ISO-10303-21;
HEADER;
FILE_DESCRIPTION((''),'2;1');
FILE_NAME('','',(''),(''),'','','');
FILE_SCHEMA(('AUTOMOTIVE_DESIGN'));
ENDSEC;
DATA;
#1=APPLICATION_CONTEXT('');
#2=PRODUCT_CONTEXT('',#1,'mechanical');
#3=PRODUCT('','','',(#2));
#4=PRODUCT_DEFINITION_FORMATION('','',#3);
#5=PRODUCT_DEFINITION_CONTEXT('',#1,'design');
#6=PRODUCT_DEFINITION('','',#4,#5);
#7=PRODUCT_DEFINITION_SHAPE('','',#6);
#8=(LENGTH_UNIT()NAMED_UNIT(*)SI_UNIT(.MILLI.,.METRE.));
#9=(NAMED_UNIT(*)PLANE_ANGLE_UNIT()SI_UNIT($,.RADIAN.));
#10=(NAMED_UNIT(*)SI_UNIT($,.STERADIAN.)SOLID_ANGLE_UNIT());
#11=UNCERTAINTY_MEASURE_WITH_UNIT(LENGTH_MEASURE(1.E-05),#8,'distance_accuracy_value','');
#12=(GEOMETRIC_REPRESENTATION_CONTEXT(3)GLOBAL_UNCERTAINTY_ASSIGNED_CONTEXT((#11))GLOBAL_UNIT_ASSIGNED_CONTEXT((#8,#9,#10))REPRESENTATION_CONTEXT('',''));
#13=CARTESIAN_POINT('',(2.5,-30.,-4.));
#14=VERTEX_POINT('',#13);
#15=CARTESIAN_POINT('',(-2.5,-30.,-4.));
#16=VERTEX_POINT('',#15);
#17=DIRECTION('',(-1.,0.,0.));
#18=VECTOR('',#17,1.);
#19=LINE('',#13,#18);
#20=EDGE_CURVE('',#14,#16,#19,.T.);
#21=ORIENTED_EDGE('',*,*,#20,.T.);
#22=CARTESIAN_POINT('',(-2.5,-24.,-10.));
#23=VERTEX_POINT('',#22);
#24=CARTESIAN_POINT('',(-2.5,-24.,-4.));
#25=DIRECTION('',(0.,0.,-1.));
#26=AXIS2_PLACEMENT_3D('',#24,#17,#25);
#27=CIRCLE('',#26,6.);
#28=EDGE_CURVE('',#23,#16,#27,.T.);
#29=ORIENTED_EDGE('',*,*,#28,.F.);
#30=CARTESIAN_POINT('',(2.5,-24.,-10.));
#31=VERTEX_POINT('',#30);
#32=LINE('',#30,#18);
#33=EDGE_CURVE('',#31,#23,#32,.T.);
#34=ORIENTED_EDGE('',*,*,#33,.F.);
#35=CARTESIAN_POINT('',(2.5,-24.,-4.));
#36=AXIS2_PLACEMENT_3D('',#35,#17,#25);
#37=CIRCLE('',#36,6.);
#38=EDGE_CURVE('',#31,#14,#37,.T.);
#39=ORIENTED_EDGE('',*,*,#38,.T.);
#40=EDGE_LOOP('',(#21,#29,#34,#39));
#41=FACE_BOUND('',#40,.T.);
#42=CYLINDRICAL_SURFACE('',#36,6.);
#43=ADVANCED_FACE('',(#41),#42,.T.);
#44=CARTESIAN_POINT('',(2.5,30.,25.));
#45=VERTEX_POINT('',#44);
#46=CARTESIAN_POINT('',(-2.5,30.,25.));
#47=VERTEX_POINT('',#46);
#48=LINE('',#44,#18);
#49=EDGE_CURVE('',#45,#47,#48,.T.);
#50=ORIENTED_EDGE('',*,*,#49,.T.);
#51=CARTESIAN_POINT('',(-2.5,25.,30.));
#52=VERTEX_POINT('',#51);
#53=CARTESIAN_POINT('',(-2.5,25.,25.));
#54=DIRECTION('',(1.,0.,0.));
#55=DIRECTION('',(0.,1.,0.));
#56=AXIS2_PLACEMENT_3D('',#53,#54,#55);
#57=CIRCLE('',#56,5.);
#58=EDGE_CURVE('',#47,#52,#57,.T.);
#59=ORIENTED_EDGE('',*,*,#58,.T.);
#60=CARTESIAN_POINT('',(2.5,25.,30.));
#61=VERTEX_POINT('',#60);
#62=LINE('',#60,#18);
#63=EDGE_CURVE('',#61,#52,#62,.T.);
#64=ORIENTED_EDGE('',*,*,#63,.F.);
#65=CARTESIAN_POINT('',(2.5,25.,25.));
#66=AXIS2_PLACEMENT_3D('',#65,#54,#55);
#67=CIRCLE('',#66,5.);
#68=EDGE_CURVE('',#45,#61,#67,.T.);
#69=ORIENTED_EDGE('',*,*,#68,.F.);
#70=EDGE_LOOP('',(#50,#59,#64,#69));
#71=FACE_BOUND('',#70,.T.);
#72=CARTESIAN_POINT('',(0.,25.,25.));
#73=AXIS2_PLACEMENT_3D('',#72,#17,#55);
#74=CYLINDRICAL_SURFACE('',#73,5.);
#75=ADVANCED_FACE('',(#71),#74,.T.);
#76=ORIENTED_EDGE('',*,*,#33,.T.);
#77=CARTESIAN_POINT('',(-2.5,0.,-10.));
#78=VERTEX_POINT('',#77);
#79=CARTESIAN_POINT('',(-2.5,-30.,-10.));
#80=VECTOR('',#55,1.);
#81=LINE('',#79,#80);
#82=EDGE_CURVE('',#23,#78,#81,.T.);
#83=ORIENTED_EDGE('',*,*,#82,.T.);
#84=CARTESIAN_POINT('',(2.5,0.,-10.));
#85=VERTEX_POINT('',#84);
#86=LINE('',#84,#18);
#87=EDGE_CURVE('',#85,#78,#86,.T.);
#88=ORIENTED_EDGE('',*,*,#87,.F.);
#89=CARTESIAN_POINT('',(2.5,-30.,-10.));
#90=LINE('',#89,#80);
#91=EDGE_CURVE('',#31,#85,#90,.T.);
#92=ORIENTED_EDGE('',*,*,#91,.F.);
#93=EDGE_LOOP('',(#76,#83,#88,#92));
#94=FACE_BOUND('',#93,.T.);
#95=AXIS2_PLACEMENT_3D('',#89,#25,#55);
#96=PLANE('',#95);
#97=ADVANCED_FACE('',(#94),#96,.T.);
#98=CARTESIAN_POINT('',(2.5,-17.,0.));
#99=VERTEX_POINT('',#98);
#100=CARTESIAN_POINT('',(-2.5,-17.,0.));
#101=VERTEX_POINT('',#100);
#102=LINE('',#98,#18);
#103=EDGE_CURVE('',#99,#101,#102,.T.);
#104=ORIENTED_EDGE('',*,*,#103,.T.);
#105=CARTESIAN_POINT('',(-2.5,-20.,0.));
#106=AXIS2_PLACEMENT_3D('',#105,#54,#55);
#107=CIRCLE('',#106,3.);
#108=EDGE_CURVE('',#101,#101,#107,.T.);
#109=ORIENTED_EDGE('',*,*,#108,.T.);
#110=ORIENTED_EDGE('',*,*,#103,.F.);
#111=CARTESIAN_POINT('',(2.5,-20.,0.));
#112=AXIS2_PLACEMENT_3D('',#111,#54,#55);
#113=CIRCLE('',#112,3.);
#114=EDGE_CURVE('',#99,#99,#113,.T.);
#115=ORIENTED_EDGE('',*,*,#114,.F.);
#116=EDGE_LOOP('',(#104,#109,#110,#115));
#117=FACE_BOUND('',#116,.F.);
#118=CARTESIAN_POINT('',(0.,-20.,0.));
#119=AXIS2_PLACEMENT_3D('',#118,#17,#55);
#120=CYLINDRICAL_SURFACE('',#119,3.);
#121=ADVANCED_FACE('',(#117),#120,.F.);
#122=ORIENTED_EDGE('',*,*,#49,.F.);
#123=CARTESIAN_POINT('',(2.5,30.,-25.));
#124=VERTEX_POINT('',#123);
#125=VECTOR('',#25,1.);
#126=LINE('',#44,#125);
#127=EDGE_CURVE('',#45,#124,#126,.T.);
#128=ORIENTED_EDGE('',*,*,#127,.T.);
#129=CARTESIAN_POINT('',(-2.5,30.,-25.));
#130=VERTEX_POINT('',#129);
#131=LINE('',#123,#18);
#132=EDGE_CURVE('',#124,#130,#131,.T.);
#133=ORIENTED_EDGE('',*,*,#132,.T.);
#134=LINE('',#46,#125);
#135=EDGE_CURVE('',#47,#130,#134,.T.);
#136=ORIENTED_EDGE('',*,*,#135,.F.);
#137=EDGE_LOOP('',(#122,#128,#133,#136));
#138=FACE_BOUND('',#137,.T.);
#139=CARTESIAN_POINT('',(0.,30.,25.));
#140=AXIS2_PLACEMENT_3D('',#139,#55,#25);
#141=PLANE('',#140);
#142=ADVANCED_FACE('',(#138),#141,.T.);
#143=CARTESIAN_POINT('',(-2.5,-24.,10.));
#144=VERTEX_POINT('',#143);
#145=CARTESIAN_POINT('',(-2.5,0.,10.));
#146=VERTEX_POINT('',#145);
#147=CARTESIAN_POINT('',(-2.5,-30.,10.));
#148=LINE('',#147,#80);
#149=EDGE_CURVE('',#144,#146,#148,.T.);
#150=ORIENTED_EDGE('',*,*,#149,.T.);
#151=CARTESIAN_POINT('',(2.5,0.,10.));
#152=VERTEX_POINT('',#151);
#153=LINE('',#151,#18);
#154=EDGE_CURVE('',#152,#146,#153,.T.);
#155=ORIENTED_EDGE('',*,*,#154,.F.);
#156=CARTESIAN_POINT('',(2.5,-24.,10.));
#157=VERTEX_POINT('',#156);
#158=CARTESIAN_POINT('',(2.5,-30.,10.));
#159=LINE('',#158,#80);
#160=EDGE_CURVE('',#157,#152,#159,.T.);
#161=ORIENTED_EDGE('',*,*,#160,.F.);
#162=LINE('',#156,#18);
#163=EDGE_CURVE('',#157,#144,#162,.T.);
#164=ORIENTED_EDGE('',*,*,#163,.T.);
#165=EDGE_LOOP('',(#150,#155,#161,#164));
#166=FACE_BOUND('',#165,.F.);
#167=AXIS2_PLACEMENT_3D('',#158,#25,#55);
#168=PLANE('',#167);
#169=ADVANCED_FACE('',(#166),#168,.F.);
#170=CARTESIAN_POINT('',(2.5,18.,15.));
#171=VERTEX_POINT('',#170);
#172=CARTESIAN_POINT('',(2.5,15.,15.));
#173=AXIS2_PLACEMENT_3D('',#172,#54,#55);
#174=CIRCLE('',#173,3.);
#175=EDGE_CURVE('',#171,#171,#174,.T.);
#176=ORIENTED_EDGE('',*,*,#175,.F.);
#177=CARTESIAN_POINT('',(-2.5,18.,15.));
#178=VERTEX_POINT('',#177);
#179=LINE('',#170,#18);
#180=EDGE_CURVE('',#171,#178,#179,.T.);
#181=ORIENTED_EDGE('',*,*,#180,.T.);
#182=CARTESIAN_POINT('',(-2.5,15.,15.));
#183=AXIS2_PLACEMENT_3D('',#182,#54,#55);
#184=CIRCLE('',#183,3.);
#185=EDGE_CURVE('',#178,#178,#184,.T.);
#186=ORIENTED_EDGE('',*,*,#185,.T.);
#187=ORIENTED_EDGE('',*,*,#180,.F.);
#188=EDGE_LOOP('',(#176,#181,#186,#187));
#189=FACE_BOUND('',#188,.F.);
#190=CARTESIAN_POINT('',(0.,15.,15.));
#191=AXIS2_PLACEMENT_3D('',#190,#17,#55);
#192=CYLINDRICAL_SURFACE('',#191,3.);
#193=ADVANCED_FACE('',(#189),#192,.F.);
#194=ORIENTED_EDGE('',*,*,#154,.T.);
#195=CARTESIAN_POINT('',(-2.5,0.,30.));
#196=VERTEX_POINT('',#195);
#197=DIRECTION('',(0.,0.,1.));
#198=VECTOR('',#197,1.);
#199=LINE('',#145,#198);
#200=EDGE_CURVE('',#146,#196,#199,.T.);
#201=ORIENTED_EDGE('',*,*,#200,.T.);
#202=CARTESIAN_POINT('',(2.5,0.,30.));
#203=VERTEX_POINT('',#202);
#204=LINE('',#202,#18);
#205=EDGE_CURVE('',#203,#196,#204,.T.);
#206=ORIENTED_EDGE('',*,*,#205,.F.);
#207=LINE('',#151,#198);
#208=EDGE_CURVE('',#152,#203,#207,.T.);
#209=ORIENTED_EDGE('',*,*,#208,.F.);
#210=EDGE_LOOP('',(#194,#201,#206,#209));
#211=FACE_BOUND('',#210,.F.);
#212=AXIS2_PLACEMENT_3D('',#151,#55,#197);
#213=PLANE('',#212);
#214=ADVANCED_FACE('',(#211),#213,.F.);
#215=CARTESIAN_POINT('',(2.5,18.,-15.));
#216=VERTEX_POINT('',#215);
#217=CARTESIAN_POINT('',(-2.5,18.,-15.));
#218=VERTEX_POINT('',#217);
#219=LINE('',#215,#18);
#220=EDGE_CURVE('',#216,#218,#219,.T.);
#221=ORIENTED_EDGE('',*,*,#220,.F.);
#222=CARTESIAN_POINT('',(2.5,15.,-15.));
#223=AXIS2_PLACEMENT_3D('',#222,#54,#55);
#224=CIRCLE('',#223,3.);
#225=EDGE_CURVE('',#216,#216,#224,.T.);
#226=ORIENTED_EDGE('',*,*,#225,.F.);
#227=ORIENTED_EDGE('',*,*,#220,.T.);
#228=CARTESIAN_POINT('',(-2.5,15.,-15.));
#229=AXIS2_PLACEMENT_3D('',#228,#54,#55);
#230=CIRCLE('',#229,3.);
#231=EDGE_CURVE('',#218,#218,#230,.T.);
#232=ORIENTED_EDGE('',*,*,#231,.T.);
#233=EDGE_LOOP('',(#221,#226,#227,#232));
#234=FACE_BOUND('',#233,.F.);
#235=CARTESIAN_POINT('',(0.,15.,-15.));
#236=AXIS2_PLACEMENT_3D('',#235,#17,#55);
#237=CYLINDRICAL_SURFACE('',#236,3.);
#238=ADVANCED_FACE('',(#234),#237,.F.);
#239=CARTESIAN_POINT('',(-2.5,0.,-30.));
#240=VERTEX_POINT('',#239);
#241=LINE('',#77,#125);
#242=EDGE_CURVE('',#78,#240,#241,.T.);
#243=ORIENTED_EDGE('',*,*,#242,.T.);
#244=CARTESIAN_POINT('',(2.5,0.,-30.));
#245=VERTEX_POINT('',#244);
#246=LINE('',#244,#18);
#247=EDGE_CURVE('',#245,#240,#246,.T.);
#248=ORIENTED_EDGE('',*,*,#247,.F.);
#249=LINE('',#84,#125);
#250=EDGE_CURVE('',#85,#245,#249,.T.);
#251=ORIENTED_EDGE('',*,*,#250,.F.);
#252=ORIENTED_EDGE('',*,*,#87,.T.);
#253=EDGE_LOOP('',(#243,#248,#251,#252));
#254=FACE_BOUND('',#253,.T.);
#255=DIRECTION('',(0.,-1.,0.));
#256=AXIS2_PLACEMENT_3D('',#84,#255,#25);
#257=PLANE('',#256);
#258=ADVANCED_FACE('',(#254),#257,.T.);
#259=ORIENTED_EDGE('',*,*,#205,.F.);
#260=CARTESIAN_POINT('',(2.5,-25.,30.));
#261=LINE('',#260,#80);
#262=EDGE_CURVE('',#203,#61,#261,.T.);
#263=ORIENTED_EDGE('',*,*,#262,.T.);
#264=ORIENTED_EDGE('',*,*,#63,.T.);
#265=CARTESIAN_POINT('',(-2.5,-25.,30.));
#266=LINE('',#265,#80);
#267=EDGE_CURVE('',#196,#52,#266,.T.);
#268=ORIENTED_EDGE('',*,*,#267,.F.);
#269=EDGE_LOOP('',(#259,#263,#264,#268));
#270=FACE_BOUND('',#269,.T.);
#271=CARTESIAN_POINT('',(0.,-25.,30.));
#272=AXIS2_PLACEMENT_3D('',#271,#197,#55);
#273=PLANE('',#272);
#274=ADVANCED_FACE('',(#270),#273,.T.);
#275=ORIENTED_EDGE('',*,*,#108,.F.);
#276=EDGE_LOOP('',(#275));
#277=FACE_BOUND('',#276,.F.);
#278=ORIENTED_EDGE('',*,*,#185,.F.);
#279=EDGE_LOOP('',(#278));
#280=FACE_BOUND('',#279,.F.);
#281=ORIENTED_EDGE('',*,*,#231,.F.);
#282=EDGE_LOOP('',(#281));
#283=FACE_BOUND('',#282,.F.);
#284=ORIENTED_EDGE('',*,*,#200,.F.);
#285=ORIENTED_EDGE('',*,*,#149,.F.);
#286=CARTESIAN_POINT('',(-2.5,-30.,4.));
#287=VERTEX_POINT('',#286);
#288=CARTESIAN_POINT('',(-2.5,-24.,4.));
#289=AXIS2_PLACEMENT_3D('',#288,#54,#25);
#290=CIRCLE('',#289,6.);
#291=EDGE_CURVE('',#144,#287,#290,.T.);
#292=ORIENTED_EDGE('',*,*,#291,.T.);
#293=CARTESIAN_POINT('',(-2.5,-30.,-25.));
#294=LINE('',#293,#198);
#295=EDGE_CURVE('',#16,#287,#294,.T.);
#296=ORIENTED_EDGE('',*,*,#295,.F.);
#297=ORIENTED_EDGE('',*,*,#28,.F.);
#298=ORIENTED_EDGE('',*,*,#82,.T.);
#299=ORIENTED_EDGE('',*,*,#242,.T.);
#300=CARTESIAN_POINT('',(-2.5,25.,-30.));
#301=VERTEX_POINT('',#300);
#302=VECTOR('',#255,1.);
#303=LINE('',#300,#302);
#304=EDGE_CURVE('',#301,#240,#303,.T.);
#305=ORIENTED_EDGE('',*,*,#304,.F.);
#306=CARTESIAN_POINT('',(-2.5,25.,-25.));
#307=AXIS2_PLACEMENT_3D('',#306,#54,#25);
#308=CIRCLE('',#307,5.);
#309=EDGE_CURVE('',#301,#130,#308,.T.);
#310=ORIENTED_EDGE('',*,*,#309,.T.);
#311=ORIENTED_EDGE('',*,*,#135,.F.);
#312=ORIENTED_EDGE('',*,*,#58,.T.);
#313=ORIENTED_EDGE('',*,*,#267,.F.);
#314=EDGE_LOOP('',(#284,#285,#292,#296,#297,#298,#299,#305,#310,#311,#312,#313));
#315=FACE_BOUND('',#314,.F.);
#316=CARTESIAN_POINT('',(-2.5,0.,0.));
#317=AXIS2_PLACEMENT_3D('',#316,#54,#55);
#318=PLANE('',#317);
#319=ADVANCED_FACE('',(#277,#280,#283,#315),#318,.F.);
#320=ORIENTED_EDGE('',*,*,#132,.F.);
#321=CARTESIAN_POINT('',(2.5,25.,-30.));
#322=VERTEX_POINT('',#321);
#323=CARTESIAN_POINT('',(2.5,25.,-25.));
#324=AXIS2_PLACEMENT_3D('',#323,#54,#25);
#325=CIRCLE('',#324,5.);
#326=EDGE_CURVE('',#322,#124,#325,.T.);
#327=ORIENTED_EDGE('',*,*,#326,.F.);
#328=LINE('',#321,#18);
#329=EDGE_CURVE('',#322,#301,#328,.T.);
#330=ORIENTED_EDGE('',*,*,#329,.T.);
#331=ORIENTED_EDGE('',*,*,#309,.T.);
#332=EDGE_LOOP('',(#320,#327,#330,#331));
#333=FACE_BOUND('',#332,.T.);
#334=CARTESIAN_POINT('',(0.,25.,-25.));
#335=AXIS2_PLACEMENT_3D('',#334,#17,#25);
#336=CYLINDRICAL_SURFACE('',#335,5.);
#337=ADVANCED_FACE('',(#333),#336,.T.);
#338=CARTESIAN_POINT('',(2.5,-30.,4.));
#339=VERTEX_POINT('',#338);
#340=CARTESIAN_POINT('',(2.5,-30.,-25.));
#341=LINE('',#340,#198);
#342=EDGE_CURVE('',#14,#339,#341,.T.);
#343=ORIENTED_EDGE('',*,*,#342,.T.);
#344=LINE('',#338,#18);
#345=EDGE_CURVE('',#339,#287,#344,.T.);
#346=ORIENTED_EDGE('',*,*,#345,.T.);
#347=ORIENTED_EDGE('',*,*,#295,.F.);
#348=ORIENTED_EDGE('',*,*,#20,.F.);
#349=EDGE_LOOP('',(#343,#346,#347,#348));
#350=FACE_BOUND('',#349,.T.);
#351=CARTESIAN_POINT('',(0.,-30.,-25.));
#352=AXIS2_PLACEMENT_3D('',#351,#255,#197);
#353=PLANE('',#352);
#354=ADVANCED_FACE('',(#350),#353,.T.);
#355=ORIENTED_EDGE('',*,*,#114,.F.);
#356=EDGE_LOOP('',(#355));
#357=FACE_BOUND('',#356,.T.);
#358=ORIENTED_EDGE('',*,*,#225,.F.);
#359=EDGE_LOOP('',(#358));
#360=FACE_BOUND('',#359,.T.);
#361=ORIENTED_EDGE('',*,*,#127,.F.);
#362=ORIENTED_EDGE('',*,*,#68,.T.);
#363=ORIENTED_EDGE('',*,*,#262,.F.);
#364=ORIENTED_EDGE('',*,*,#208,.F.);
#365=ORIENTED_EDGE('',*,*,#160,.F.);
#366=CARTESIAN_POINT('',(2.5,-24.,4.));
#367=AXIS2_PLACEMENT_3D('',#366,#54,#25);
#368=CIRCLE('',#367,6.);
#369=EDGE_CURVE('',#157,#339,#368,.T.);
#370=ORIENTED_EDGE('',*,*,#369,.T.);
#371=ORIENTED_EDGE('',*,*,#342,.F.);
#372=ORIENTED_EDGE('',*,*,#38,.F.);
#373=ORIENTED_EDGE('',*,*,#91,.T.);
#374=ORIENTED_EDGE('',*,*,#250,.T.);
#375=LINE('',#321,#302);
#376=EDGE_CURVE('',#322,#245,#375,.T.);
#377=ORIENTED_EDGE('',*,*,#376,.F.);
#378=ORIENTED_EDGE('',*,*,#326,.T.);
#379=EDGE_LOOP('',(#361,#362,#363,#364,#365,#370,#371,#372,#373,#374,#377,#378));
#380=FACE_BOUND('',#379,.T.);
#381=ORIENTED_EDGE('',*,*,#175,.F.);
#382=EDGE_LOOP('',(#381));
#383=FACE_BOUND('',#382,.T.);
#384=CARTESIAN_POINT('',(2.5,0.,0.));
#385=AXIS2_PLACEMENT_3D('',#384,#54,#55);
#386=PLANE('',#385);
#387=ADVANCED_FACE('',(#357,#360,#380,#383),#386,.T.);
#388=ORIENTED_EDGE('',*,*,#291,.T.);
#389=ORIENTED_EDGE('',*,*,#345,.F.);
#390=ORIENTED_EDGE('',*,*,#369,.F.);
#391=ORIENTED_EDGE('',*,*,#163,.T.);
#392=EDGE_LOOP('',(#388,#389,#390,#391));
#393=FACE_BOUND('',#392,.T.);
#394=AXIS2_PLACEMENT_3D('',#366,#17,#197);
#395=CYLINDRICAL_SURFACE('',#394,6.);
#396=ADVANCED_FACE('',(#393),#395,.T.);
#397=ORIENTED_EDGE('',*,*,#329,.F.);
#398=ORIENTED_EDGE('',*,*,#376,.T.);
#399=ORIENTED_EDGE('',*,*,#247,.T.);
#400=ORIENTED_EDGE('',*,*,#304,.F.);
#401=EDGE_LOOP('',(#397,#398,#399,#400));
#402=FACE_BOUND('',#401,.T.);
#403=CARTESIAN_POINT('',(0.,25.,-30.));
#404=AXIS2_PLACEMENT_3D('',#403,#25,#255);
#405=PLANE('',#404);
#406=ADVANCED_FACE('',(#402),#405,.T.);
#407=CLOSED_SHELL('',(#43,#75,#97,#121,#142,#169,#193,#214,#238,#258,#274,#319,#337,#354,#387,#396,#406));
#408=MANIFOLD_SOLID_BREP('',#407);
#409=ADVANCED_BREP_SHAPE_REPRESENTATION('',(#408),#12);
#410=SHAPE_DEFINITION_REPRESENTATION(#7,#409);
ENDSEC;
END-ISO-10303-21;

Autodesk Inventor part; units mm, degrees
ref_plane "YZ Plane" through (0, 0, 0) normal (1, 0, 0) x (0, 1, 0)
ref_plane "XZ Plane" through (0, 0, 0) normal (0, 1, 0) x (-1, 0, 0)
ref_plane "XY Plane" through (0, 0, 0) normal (0, 0, 1) x (1, 0, 0)
sketch "Sketch1" plane through (0, 0, 0) normal (1, 0, 0) x (0, 1, 0)
  line L0 (-25, 30) -> (25, 30)
  line L1 (30, 25) -> (30, -25)
  line L2 (25, -30) -> (-25, -30)
  line L3 (-30, -25) -> (-30, 25)
  line L4 (-30, 30) -> (30, -30) construction
  line L5 (30, 30) -> (-30, -30) construction
  arc A0 (-25, 30) -> (-30, 25) centre (-25, 25) ccw
  arc A1 (-30, -25) -> (-25, -30) centre (-25, -25) ccw
  arc A2 (25, -30) -> (30, -25) centre (25, -25) ccw
  arc A3 (30, 25) -> (25, 30) centre (25, 25) ccw
  circle A4 centre (-20, 0) radius 3
  circle A5 centre (15, 15) radius 3
  circle A6 centre (15, -15) radius 3
  point P0 (0, 0)
  dimension "d0" = 60
  dimension "d1" = 60
  dimension "d6" = 5
  dimension "d7" = 6
  dimension "d10" = 15
  dimension "d11" = 30
  dimension "d12" = 15
  dimension "d13" = 6
  dimension "d14" = 35
extrude "Plate1" add sketch "Sketch1" along normal mid plane 5
sketch "Sketch2" plane through (2.5, 0, 0) normal (1, 0, 0) x (0, 0, -1)
  line L0 (-30, -30) -> (-10, -30)
  line L1 (-10, -30) -> (-10, 0)
  line L2 (-10, 0) -> (-30, 0)
  line L3 (-30, 0) -> (-30, -30)
  line L4 (30, -30) -> (10, -30)
  line L5 (10, -30) -> (10, 0)
  line L6 (10, 0) -> (30, 0)
  line L7 (30, 0) -> (30, -30)
  circle A0 centre (-15, 15) radius 3 projected
  circle A1 centre (0, -20) radius 3 projected
  line L8 (-30, -25) -> (-30, 25) construction
  point P0 (0, 0)
  dimension "d15" = 15
  dimension "d17" = 10
  dimension "d18" = 10
  dimension "d19" = 30
extrude "Cut1" cut sketch "Sketch2" against normal blind 5 contours L3 L2 L1 L0 | L4 L5 L6 L7
fillet "Corner Round1" radius 6 2 edges at (0, -30, 10) (0, -30, -10)
equation "\"d20\" = Thickness"
equation "\"d9\" = Thickness"
equation "\"BendRadius\" = Thickness"
equation "\"BendReliefWidth\" = Thickness"
equation "\"BendReliefDepth\" = 0.5 * Thickness"
equation "\"TransitionRadius\" = BendRadius"
equation "\"JacobiRadiusSize\" = BendRadius"
equation "\"GapSize\" = Thickness"
equation "\"Thickness\" = 5"
properties part number "HCMUTE-CDT23-BAT_CANG_BANG_TAI" material "Stainless Steel"
